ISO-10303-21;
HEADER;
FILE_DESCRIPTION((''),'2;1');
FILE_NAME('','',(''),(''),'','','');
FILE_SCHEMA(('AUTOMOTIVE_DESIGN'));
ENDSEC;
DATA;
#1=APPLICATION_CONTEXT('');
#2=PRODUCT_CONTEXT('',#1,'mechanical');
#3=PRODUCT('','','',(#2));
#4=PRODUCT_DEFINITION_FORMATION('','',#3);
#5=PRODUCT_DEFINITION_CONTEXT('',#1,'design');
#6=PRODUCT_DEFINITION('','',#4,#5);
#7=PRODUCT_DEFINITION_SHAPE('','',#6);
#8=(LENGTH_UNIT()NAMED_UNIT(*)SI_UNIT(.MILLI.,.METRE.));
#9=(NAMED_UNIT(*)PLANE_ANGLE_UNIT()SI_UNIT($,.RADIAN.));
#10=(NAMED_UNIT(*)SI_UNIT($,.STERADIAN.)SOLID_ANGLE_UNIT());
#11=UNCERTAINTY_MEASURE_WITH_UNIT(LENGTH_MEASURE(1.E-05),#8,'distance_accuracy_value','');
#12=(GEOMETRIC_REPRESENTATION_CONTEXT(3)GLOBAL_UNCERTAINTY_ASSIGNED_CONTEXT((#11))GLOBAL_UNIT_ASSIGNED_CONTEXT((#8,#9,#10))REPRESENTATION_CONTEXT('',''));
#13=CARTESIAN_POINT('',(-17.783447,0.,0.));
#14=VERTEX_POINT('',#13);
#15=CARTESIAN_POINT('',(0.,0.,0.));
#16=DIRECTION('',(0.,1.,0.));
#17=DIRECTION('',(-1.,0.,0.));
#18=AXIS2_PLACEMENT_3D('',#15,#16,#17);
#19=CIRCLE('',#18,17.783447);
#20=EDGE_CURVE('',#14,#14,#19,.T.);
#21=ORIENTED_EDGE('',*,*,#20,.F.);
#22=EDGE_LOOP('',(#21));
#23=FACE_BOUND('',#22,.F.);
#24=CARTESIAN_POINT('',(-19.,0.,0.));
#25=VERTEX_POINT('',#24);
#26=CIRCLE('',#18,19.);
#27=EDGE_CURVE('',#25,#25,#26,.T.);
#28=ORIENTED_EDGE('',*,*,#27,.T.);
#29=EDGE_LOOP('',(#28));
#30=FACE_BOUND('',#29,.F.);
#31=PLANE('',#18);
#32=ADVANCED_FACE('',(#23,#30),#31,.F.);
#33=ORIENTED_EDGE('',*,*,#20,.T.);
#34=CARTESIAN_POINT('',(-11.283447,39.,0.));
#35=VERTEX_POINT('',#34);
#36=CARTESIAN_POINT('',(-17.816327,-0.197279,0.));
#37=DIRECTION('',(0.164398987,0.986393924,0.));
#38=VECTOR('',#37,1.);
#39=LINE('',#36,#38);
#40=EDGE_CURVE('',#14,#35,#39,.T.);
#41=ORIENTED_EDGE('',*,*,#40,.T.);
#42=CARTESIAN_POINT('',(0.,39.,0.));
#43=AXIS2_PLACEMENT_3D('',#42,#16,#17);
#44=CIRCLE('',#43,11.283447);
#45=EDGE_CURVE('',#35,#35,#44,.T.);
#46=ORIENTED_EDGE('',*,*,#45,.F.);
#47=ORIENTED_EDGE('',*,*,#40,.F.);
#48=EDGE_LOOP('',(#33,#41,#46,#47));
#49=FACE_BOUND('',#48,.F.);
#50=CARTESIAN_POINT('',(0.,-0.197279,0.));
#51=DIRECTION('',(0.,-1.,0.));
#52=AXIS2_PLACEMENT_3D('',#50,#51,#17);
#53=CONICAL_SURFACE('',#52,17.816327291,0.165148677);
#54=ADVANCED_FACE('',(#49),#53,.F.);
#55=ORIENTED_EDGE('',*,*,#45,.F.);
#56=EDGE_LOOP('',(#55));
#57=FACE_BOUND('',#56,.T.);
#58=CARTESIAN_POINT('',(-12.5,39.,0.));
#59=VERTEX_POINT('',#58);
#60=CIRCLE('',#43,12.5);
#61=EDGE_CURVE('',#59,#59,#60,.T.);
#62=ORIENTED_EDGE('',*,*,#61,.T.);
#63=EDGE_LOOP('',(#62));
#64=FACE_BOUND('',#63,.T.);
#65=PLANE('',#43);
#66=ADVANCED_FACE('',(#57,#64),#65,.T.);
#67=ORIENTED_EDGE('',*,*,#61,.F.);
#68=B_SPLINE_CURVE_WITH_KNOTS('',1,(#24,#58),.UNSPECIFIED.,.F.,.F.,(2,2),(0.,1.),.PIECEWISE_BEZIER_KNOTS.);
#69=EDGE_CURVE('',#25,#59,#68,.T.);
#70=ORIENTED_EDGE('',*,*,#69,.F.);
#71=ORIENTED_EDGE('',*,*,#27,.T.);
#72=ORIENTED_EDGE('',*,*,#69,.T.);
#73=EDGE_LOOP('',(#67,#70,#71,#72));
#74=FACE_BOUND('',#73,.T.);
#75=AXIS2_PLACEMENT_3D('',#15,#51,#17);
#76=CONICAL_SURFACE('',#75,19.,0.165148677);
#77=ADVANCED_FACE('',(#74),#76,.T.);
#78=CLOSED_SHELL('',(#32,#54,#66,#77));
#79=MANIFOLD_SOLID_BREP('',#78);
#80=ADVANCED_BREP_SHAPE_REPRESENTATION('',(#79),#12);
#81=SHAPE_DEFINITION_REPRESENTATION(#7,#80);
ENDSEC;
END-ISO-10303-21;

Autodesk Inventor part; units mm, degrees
ref_plane "YZ Plane" through (0, 0, 0) normal (1, 0, 0) x (0, 1, 0)
ref_plane "XY Plane" through (0, 0, 0) normal (0, 0, 1) x (1, 0, 0)
sketch "Szkic6" plane through (0, 0, 0) normal (0, 1, 0) x (-1, 0, 0)
  circle A0 centre (0, 0) radius 19
  dimension "d33" = 38
ref_plane "Płaszczyzna konstrukcyjna1" through (0, 39, 0) normal (0, 1, 0) x (-1, 0, 0)
sketch "Szkic7" plane through (0, 39, 0) normal (0, 1, 0) x (-1, 0, 0)
  circle A0 centre (0, 0) radius 12.5
  dimension "d35" = 25
loft "Wyciągnięcie złożone1" add profiles "Szkic6", "Szkic7"
shell "Skorupa1" thickness 1.2 removed faces 2 at (-2.488, 39, -2.432) at (-4.7406, 0, -4.1998)
equation "\"d33\" = OD1"
equation "\"d35\" = OD2"
equation "\"d52\" = THK"
equation "\"SzerokośćGięciaPodcięcia\" = Grubość"
equation "\"RozmiarPodcięciaNarożnika\" = 4 * Grubość"
equation "\"PromieńPrzejścia\" = PromieńGięcia"
equation "\"Rozmiar_promienia_Jacobiego\" = PromieńGięcia"
equation "\"Wielk_odstępu\" = Grubość"
equation "\"d2\" = PromieńGięcia"
equation "\"d23\" = PromieńGięcia"
equation "\"OD1\" = 38"
equation "\"OD2\" = 25"
equation "\"L\" = 39"
equation "\"THK\" = 1.2"
equation "\"d34\" = L"
equation "\"Grubość\" = 1.5"
equation "\"PromieńGięcia\" = 3"
properties part number "Redukcja symetryczna Ø38x25x1,2 L=39" material "304"
